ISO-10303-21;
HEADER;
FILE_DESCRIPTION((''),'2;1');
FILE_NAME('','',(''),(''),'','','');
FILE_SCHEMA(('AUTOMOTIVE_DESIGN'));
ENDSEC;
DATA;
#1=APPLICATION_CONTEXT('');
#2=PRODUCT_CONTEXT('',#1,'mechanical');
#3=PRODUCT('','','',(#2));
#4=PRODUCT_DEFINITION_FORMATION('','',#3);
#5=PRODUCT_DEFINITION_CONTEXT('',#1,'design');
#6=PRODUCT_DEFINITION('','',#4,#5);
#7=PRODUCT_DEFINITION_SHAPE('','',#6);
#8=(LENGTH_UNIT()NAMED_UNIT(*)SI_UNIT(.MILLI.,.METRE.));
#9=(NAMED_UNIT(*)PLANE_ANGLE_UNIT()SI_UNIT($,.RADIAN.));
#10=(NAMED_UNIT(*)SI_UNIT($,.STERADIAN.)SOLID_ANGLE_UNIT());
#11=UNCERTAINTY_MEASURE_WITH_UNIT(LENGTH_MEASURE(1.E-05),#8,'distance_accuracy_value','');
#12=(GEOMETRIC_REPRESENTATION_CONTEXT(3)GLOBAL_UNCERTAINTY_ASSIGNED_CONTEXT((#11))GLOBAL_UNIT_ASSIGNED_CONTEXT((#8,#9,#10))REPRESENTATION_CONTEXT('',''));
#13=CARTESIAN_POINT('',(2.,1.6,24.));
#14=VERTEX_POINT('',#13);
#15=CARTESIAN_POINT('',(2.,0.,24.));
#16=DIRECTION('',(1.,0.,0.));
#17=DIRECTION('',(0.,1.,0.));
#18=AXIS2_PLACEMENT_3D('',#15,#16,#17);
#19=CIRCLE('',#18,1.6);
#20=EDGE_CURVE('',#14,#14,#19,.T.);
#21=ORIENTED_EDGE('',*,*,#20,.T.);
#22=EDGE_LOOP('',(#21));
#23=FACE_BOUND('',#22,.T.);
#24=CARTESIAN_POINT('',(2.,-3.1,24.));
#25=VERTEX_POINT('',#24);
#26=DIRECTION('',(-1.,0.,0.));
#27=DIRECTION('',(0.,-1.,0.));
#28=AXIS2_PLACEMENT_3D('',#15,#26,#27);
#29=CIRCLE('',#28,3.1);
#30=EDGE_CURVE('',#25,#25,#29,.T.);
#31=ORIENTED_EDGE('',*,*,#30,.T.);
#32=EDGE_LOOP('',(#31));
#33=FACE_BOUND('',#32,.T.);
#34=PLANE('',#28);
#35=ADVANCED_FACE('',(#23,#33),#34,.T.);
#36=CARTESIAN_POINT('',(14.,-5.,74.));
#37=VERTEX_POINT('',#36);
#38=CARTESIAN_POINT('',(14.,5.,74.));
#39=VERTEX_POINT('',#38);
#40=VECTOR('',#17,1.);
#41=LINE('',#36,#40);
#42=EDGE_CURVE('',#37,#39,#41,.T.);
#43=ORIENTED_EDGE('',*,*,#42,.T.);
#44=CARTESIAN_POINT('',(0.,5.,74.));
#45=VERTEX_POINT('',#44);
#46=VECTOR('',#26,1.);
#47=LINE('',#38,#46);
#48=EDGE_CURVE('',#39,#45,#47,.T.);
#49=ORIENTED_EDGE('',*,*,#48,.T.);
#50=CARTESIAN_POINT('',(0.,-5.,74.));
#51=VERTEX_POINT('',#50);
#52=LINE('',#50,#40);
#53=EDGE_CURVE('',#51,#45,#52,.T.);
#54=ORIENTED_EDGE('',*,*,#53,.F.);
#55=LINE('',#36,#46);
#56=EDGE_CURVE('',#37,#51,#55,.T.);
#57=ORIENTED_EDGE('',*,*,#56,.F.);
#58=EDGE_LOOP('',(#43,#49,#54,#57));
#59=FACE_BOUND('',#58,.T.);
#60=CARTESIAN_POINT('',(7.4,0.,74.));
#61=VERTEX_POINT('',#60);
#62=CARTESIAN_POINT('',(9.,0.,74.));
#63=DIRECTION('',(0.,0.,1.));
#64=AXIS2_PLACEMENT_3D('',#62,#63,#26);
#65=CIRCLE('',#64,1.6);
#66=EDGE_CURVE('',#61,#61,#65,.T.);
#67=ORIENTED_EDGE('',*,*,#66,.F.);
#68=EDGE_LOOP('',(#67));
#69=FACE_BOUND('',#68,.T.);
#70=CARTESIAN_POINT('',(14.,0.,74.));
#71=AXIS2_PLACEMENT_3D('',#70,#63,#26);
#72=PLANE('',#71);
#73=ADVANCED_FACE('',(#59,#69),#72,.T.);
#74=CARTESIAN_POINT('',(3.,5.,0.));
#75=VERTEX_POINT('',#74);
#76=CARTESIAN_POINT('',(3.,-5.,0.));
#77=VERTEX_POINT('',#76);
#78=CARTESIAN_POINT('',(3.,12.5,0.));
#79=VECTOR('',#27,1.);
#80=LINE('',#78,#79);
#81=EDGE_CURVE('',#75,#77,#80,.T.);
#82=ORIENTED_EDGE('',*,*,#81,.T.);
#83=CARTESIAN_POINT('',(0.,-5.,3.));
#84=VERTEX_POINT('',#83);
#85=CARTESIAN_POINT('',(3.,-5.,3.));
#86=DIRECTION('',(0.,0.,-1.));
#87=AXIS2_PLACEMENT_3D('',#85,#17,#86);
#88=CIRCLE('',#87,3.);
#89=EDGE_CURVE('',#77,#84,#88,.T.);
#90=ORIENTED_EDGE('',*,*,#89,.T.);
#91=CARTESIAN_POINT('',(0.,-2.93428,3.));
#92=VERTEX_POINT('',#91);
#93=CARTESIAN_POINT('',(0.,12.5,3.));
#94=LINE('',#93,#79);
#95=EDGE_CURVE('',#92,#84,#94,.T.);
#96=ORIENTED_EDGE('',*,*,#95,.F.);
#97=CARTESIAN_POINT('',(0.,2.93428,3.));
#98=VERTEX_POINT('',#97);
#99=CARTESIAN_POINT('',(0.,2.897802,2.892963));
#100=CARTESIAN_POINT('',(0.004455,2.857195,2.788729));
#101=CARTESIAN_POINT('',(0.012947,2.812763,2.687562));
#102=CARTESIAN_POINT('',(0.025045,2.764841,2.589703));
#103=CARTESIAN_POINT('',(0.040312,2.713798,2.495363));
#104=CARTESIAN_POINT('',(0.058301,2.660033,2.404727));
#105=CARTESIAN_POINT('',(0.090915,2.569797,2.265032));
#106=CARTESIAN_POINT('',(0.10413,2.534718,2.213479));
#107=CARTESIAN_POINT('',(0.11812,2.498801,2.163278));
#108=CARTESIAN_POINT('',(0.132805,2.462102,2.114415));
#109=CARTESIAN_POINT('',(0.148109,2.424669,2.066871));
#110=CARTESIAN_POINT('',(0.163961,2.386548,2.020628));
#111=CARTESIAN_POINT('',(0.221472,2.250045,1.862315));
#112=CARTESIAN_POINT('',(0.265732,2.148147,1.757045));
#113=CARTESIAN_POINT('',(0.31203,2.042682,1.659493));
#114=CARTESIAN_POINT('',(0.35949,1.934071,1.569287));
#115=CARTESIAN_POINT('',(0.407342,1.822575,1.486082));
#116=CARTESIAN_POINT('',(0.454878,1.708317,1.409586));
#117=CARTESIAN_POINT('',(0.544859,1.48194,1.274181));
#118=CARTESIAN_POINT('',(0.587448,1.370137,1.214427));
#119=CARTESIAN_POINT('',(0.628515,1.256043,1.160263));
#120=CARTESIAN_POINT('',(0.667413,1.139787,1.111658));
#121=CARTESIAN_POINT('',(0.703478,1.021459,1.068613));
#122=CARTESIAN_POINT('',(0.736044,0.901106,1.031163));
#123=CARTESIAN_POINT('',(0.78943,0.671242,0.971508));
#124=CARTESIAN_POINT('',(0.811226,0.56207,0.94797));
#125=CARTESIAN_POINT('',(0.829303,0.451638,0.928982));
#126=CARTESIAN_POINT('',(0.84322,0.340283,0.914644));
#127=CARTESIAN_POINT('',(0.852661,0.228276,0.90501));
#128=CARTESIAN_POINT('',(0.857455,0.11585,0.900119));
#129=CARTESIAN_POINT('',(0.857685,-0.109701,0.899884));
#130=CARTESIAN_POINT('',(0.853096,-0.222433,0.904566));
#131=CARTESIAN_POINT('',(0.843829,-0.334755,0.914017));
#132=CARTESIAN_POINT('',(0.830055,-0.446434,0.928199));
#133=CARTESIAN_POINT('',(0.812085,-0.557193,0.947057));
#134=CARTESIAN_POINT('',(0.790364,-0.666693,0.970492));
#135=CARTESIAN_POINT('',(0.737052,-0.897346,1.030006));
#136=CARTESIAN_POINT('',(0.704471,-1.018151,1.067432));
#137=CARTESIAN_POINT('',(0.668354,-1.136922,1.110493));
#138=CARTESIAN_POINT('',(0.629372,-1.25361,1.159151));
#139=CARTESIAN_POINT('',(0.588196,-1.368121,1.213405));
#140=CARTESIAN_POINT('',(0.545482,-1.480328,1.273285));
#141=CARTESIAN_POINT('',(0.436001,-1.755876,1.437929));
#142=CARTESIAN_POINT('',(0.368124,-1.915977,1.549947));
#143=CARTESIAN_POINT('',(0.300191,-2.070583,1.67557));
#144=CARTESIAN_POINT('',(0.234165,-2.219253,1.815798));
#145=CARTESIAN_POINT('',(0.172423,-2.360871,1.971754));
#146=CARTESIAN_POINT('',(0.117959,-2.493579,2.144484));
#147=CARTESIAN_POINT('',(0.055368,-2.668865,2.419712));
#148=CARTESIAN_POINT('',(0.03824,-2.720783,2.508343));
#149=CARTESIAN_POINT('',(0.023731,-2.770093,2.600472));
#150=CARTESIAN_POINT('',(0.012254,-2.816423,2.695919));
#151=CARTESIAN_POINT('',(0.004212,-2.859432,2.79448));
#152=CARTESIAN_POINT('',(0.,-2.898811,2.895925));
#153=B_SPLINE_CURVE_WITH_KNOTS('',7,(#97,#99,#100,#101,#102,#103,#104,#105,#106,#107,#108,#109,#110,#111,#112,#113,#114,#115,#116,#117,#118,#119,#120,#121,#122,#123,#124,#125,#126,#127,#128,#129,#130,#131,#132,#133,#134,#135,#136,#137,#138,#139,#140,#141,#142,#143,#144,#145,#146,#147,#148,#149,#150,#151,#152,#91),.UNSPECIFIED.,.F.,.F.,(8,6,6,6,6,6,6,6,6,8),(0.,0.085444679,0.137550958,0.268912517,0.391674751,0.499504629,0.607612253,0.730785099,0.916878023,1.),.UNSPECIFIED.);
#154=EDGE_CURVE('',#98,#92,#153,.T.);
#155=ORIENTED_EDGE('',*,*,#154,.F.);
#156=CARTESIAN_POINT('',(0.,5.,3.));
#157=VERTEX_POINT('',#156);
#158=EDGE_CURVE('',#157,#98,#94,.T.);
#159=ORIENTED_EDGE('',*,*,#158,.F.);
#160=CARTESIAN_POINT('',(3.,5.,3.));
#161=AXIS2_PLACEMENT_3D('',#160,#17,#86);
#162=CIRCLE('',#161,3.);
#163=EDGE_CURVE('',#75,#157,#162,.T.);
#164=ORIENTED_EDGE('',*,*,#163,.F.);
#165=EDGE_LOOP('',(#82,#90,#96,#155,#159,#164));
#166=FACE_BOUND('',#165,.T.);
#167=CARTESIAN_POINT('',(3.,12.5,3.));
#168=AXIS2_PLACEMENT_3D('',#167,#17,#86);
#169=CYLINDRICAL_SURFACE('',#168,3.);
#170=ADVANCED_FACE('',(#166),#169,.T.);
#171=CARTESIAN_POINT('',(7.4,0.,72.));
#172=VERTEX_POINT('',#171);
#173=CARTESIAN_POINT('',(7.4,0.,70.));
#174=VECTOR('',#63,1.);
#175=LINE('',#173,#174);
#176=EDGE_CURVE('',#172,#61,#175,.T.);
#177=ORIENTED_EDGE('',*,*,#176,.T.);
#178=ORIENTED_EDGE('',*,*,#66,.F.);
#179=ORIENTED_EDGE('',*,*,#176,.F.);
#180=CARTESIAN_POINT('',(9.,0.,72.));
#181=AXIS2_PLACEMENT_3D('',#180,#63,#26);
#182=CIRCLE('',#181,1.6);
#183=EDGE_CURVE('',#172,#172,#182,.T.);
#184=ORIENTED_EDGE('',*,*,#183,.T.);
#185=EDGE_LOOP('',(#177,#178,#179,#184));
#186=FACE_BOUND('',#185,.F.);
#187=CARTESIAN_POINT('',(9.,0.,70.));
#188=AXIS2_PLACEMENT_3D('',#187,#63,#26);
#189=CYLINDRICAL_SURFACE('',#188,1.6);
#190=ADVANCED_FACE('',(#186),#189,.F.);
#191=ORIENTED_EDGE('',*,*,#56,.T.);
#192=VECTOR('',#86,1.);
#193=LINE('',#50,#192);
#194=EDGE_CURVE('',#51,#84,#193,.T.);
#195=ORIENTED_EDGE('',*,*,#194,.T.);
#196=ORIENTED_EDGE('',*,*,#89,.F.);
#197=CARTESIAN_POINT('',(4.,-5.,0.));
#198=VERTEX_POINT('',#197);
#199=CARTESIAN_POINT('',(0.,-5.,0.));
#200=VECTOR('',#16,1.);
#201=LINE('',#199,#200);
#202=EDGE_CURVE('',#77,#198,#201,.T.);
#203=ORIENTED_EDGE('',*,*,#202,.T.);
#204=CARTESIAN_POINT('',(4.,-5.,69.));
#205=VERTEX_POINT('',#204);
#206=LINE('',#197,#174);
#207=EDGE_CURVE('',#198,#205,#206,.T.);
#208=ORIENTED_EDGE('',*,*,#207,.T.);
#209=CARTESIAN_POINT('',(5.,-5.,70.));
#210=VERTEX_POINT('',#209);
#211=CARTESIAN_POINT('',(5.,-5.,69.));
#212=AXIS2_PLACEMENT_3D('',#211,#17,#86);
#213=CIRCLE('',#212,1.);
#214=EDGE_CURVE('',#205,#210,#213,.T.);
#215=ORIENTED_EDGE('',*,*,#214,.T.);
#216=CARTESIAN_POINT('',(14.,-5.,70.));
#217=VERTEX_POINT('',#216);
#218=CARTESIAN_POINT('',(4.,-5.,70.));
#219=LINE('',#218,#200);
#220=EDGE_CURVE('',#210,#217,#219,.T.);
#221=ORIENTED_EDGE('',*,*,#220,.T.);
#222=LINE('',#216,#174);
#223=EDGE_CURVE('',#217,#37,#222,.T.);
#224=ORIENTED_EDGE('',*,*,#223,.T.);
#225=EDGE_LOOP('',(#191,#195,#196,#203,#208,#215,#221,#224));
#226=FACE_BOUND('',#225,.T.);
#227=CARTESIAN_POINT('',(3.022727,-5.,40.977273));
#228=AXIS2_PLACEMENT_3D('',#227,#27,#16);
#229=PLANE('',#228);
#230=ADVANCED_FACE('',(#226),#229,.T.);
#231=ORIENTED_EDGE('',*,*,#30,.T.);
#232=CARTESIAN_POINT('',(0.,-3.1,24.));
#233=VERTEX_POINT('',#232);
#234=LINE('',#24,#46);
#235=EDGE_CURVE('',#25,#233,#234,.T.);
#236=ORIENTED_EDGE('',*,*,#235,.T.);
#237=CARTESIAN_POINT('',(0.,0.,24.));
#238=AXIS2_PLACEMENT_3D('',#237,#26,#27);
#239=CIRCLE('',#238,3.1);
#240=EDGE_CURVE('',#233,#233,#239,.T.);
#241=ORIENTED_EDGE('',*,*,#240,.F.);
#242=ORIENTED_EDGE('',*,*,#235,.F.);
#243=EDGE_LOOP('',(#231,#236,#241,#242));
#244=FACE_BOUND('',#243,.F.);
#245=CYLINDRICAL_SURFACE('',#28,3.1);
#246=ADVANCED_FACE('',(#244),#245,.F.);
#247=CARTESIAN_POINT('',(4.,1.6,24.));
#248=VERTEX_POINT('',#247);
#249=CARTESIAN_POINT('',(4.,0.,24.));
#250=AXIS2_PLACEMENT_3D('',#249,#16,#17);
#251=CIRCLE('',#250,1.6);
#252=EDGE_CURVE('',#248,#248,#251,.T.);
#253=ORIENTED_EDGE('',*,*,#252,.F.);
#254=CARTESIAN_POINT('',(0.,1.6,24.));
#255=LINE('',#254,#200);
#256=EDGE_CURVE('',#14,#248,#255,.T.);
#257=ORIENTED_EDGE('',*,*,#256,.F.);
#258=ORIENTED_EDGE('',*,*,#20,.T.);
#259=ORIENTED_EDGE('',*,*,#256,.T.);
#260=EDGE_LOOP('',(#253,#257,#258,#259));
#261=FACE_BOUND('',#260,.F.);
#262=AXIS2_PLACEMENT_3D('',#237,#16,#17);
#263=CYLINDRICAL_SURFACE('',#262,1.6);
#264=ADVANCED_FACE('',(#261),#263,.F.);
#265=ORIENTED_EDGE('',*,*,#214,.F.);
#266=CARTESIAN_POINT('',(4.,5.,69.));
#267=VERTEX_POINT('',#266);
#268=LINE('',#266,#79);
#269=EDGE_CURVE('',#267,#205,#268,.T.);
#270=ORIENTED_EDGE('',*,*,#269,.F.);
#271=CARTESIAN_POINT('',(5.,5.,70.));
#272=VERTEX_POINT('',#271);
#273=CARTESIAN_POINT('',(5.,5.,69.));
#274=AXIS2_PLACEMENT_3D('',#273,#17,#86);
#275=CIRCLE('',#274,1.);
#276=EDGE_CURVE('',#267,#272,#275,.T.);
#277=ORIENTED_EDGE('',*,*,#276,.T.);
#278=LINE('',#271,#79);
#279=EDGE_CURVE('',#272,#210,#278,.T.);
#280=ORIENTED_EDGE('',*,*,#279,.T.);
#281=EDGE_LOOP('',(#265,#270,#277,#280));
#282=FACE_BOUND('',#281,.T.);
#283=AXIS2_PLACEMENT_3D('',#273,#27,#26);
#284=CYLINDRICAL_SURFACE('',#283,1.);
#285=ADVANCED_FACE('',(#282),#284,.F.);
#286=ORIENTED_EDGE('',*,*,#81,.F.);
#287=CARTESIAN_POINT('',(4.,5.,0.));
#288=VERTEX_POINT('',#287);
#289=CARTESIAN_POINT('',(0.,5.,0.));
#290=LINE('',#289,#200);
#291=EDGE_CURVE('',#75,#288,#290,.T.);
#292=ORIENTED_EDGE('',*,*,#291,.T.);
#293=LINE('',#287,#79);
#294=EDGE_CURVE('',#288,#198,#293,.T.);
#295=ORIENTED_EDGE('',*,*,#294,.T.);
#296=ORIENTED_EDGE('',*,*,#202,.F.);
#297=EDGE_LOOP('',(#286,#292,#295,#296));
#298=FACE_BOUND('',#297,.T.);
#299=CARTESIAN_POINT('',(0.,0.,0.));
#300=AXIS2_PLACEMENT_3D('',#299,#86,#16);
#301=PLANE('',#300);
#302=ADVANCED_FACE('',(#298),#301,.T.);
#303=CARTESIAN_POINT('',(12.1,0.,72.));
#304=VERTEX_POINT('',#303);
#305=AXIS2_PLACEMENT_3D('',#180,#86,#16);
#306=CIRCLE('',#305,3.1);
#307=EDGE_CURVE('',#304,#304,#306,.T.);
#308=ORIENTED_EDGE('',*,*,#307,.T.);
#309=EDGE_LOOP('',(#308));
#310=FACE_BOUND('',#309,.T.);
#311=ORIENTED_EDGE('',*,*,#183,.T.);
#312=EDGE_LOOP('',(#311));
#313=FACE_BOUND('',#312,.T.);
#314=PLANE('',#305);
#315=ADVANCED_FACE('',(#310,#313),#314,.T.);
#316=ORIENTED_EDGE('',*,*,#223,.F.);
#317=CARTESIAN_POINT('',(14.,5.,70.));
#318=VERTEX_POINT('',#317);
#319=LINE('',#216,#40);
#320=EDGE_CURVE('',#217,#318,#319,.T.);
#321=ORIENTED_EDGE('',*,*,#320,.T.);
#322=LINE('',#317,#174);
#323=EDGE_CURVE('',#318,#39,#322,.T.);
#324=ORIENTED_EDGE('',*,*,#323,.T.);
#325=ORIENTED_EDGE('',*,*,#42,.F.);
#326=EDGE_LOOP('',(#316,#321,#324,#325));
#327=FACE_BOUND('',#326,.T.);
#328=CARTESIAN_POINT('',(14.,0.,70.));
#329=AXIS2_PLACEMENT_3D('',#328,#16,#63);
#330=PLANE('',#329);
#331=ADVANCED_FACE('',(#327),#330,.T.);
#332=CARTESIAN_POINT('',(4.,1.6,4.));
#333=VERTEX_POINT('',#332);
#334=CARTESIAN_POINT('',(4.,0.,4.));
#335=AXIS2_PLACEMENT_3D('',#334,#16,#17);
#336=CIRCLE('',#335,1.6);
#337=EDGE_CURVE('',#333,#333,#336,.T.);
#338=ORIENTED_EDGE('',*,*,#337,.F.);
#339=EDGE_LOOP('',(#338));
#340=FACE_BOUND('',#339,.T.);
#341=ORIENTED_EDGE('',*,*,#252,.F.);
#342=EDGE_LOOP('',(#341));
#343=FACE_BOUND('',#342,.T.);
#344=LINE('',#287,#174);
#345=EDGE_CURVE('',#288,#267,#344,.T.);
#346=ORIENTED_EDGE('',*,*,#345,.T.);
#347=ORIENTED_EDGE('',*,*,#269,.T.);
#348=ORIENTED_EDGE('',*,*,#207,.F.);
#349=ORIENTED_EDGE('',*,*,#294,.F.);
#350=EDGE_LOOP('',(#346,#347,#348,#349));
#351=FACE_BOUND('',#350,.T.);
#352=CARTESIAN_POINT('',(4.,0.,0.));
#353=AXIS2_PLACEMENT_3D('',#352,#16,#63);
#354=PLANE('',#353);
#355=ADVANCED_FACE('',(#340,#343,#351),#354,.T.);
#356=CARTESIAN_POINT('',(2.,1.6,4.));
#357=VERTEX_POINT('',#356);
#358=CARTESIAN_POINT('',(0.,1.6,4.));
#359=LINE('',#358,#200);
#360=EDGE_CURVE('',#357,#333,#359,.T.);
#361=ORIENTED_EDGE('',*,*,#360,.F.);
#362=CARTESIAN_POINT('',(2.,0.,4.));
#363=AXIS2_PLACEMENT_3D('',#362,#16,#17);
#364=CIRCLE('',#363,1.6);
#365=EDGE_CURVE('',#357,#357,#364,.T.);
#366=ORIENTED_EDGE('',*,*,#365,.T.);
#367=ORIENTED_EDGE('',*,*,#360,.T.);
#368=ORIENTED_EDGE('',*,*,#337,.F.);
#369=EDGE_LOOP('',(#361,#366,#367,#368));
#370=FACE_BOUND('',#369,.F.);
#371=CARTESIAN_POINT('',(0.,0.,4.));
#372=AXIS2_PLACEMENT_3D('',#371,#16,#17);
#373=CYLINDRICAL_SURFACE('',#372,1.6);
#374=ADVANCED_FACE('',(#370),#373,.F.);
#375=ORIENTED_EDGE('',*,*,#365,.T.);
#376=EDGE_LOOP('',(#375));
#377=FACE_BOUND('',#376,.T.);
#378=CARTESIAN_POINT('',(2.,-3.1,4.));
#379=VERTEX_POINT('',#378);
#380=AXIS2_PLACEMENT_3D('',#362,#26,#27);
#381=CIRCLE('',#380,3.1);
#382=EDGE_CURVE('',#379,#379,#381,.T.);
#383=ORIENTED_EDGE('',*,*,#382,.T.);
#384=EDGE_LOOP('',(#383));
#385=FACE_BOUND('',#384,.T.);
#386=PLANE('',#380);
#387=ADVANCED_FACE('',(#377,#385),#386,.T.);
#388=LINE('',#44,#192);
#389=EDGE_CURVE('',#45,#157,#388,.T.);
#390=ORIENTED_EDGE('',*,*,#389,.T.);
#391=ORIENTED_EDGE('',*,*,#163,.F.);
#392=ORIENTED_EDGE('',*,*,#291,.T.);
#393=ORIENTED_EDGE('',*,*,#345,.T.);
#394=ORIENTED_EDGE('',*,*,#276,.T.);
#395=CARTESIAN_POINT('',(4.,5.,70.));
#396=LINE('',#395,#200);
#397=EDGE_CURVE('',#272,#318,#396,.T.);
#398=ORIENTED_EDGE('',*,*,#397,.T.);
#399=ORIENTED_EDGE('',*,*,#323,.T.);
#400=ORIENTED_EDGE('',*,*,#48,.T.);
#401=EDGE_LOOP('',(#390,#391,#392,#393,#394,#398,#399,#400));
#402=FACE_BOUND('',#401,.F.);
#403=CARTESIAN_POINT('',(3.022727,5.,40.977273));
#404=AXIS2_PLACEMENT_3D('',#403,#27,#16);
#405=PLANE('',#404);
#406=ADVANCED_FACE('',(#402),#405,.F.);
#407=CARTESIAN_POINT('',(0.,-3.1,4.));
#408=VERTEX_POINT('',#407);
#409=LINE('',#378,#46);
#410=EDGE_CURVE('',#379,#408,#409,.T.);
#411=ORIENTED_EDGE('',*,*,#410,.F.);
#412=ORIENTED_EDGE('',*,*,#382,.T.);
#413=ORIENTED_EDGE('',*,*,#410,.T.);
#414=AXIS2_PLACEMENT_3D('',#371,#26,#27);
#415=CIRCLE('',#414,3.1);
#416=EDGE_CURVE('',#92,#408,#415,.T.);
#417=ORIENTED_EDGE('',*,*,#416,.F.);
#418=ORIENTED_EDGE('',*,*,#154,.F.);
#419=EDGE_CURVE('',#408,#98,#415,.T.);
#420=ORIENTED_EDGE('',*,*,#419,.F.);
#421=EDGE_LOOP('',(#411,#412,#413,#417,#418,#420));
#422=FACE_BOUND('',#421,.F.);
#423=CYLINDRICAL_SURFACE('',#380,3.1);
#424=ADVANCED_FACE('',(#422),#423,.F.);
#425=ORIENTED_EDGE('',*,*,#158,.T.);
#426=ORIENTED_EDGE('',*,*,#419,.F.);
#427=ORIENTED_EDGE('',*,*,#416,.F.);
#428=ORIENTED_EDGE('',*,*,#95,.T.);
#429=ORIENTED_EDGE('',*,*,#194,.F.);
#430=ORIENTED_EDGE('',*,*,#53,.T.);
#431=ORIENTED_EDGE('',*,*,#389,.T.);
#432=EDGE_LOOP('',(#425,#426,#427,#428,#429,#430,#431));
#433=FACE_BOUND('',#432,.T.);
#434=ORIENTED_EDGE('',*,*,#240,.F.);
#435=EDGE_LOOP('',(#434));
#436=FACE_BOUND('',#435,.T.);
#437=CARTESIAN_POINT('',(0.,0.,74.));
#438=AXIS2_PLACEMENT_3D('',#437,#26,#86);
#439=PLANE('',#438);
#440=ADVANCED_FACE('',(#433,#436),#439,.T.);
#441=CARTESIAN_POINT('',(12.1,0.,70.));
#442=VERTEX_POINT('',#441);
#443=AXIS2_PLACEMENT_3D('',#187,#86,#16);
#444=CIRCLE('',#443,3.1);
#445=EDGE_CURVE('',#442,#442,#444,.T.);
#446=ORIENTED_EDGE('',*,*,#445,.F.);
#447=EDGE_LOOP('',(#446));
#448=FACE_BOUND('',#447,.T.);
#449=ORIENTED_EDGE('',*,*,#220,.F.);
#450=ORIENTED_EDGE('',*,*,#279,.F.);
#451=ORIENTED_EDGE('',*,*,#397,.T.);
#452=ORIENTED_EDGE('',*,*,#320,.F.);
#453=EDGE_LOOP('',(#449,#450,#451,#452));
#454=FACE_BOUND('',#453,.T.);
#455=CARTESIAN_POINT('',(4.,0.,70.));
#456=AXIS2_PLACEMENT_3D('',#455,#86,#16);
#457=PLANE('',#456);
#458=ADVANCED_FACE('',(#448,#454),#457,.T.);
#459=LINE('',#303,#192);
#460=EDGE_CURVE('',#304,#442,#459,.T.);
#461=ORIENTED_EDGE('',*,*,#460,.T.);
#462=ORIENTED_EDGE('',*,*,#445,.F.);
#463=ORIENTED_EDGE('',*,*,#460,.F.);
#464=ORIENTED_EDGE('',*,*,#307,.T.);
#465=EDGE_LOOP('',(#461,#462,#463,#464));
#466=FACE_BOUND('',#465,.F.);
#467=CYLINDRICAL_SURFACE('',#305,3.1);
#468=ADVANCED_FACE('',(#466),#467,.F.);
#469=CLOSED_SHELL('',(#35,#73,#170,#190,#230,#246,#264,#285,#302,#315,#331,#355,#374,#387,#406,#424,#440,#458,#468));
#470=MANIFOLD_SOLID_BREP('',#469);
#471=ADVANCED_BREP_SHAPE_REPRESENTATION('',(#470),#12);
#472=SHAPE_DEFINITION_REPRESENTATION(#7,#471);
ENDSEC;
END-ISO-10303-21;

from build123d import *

# Parameters (mm, degrees)
F1_DEPTH             = 5
F4_D                 = 3.2
F4_CBORE_D           = 6.2
F4_CBORE_DEPTH       = 2
F4_ON_F3_D           = 3.2
F4_ON_F3_CBORE_D     = 6.2
F4_ON_F3_CBORE_DEPTH = 2
F5_R                 = 1
F6_T1_DEPTH          = 25


# Not quite as in the source:
# - a fillet or chamfer that OpenCascade refuses, or shapes differently, is made with other operations: its cross-section is extruded or revolved along the edge and cut away or added


with BuildPart() as f1:
    # F0 (on Front) → F1 (new body, symmetric)
    with BuildSketch(Plane.XZ):
        Polygon((0, 74), (0, 0), (4, 0), (4, 70), (14, 70), (14, 74), align=None)
    extrude(amount=F1_DEPTH, both=True)

    # F4 (through all)
    with Locations(Plane(origin=(0, 0, 0), x_dir=(0, -1, 0), z_dir=(-1, 0, 0))):
        with Locations((0, 24), (0, 4)):
            CounterBoreHole(F4_D / 2, F4_CBORE_D / 2, F4_CBORE_DEPTH)

    # F4 on F3 (through all)
    with Locations(Plane(origin=(0, 0, 70), x_dir=(1, 0, 0), z_dir=(0, 0, -1))):
        with Locations((9, 0)):
            CounterBoreHole(F4_ON_F3_D / 2, F4_ON_F3_CBORE_D / 2, F4_ON_F3_CBORE_DEPTH)

    # F5
    f5_edges = [f1.edges().sort_by_distance(p)[0] for p in [
        (4, 0, 70),
    ]]
    fillet(f5_edges, radius=F5_R)

    # F6: fillet of radius 3 on 1 edges, made by hand

    # F6_s2 → F6_t1 (cut)
    with BuildSketch(Plane.XZ.offset(-12.5)):
        with BuildLine():
            ThreePointArc((3, 0), (0.8786796564, 0.8786796564), (0, 3))
            Line((0, 3), (0, 0))
            Line((0, 0), (3, 0))
        make_face()
    extrude(amount=F6_T1_DEPTH, mode=Mode.SUBTRACT)


solid = f1.part
